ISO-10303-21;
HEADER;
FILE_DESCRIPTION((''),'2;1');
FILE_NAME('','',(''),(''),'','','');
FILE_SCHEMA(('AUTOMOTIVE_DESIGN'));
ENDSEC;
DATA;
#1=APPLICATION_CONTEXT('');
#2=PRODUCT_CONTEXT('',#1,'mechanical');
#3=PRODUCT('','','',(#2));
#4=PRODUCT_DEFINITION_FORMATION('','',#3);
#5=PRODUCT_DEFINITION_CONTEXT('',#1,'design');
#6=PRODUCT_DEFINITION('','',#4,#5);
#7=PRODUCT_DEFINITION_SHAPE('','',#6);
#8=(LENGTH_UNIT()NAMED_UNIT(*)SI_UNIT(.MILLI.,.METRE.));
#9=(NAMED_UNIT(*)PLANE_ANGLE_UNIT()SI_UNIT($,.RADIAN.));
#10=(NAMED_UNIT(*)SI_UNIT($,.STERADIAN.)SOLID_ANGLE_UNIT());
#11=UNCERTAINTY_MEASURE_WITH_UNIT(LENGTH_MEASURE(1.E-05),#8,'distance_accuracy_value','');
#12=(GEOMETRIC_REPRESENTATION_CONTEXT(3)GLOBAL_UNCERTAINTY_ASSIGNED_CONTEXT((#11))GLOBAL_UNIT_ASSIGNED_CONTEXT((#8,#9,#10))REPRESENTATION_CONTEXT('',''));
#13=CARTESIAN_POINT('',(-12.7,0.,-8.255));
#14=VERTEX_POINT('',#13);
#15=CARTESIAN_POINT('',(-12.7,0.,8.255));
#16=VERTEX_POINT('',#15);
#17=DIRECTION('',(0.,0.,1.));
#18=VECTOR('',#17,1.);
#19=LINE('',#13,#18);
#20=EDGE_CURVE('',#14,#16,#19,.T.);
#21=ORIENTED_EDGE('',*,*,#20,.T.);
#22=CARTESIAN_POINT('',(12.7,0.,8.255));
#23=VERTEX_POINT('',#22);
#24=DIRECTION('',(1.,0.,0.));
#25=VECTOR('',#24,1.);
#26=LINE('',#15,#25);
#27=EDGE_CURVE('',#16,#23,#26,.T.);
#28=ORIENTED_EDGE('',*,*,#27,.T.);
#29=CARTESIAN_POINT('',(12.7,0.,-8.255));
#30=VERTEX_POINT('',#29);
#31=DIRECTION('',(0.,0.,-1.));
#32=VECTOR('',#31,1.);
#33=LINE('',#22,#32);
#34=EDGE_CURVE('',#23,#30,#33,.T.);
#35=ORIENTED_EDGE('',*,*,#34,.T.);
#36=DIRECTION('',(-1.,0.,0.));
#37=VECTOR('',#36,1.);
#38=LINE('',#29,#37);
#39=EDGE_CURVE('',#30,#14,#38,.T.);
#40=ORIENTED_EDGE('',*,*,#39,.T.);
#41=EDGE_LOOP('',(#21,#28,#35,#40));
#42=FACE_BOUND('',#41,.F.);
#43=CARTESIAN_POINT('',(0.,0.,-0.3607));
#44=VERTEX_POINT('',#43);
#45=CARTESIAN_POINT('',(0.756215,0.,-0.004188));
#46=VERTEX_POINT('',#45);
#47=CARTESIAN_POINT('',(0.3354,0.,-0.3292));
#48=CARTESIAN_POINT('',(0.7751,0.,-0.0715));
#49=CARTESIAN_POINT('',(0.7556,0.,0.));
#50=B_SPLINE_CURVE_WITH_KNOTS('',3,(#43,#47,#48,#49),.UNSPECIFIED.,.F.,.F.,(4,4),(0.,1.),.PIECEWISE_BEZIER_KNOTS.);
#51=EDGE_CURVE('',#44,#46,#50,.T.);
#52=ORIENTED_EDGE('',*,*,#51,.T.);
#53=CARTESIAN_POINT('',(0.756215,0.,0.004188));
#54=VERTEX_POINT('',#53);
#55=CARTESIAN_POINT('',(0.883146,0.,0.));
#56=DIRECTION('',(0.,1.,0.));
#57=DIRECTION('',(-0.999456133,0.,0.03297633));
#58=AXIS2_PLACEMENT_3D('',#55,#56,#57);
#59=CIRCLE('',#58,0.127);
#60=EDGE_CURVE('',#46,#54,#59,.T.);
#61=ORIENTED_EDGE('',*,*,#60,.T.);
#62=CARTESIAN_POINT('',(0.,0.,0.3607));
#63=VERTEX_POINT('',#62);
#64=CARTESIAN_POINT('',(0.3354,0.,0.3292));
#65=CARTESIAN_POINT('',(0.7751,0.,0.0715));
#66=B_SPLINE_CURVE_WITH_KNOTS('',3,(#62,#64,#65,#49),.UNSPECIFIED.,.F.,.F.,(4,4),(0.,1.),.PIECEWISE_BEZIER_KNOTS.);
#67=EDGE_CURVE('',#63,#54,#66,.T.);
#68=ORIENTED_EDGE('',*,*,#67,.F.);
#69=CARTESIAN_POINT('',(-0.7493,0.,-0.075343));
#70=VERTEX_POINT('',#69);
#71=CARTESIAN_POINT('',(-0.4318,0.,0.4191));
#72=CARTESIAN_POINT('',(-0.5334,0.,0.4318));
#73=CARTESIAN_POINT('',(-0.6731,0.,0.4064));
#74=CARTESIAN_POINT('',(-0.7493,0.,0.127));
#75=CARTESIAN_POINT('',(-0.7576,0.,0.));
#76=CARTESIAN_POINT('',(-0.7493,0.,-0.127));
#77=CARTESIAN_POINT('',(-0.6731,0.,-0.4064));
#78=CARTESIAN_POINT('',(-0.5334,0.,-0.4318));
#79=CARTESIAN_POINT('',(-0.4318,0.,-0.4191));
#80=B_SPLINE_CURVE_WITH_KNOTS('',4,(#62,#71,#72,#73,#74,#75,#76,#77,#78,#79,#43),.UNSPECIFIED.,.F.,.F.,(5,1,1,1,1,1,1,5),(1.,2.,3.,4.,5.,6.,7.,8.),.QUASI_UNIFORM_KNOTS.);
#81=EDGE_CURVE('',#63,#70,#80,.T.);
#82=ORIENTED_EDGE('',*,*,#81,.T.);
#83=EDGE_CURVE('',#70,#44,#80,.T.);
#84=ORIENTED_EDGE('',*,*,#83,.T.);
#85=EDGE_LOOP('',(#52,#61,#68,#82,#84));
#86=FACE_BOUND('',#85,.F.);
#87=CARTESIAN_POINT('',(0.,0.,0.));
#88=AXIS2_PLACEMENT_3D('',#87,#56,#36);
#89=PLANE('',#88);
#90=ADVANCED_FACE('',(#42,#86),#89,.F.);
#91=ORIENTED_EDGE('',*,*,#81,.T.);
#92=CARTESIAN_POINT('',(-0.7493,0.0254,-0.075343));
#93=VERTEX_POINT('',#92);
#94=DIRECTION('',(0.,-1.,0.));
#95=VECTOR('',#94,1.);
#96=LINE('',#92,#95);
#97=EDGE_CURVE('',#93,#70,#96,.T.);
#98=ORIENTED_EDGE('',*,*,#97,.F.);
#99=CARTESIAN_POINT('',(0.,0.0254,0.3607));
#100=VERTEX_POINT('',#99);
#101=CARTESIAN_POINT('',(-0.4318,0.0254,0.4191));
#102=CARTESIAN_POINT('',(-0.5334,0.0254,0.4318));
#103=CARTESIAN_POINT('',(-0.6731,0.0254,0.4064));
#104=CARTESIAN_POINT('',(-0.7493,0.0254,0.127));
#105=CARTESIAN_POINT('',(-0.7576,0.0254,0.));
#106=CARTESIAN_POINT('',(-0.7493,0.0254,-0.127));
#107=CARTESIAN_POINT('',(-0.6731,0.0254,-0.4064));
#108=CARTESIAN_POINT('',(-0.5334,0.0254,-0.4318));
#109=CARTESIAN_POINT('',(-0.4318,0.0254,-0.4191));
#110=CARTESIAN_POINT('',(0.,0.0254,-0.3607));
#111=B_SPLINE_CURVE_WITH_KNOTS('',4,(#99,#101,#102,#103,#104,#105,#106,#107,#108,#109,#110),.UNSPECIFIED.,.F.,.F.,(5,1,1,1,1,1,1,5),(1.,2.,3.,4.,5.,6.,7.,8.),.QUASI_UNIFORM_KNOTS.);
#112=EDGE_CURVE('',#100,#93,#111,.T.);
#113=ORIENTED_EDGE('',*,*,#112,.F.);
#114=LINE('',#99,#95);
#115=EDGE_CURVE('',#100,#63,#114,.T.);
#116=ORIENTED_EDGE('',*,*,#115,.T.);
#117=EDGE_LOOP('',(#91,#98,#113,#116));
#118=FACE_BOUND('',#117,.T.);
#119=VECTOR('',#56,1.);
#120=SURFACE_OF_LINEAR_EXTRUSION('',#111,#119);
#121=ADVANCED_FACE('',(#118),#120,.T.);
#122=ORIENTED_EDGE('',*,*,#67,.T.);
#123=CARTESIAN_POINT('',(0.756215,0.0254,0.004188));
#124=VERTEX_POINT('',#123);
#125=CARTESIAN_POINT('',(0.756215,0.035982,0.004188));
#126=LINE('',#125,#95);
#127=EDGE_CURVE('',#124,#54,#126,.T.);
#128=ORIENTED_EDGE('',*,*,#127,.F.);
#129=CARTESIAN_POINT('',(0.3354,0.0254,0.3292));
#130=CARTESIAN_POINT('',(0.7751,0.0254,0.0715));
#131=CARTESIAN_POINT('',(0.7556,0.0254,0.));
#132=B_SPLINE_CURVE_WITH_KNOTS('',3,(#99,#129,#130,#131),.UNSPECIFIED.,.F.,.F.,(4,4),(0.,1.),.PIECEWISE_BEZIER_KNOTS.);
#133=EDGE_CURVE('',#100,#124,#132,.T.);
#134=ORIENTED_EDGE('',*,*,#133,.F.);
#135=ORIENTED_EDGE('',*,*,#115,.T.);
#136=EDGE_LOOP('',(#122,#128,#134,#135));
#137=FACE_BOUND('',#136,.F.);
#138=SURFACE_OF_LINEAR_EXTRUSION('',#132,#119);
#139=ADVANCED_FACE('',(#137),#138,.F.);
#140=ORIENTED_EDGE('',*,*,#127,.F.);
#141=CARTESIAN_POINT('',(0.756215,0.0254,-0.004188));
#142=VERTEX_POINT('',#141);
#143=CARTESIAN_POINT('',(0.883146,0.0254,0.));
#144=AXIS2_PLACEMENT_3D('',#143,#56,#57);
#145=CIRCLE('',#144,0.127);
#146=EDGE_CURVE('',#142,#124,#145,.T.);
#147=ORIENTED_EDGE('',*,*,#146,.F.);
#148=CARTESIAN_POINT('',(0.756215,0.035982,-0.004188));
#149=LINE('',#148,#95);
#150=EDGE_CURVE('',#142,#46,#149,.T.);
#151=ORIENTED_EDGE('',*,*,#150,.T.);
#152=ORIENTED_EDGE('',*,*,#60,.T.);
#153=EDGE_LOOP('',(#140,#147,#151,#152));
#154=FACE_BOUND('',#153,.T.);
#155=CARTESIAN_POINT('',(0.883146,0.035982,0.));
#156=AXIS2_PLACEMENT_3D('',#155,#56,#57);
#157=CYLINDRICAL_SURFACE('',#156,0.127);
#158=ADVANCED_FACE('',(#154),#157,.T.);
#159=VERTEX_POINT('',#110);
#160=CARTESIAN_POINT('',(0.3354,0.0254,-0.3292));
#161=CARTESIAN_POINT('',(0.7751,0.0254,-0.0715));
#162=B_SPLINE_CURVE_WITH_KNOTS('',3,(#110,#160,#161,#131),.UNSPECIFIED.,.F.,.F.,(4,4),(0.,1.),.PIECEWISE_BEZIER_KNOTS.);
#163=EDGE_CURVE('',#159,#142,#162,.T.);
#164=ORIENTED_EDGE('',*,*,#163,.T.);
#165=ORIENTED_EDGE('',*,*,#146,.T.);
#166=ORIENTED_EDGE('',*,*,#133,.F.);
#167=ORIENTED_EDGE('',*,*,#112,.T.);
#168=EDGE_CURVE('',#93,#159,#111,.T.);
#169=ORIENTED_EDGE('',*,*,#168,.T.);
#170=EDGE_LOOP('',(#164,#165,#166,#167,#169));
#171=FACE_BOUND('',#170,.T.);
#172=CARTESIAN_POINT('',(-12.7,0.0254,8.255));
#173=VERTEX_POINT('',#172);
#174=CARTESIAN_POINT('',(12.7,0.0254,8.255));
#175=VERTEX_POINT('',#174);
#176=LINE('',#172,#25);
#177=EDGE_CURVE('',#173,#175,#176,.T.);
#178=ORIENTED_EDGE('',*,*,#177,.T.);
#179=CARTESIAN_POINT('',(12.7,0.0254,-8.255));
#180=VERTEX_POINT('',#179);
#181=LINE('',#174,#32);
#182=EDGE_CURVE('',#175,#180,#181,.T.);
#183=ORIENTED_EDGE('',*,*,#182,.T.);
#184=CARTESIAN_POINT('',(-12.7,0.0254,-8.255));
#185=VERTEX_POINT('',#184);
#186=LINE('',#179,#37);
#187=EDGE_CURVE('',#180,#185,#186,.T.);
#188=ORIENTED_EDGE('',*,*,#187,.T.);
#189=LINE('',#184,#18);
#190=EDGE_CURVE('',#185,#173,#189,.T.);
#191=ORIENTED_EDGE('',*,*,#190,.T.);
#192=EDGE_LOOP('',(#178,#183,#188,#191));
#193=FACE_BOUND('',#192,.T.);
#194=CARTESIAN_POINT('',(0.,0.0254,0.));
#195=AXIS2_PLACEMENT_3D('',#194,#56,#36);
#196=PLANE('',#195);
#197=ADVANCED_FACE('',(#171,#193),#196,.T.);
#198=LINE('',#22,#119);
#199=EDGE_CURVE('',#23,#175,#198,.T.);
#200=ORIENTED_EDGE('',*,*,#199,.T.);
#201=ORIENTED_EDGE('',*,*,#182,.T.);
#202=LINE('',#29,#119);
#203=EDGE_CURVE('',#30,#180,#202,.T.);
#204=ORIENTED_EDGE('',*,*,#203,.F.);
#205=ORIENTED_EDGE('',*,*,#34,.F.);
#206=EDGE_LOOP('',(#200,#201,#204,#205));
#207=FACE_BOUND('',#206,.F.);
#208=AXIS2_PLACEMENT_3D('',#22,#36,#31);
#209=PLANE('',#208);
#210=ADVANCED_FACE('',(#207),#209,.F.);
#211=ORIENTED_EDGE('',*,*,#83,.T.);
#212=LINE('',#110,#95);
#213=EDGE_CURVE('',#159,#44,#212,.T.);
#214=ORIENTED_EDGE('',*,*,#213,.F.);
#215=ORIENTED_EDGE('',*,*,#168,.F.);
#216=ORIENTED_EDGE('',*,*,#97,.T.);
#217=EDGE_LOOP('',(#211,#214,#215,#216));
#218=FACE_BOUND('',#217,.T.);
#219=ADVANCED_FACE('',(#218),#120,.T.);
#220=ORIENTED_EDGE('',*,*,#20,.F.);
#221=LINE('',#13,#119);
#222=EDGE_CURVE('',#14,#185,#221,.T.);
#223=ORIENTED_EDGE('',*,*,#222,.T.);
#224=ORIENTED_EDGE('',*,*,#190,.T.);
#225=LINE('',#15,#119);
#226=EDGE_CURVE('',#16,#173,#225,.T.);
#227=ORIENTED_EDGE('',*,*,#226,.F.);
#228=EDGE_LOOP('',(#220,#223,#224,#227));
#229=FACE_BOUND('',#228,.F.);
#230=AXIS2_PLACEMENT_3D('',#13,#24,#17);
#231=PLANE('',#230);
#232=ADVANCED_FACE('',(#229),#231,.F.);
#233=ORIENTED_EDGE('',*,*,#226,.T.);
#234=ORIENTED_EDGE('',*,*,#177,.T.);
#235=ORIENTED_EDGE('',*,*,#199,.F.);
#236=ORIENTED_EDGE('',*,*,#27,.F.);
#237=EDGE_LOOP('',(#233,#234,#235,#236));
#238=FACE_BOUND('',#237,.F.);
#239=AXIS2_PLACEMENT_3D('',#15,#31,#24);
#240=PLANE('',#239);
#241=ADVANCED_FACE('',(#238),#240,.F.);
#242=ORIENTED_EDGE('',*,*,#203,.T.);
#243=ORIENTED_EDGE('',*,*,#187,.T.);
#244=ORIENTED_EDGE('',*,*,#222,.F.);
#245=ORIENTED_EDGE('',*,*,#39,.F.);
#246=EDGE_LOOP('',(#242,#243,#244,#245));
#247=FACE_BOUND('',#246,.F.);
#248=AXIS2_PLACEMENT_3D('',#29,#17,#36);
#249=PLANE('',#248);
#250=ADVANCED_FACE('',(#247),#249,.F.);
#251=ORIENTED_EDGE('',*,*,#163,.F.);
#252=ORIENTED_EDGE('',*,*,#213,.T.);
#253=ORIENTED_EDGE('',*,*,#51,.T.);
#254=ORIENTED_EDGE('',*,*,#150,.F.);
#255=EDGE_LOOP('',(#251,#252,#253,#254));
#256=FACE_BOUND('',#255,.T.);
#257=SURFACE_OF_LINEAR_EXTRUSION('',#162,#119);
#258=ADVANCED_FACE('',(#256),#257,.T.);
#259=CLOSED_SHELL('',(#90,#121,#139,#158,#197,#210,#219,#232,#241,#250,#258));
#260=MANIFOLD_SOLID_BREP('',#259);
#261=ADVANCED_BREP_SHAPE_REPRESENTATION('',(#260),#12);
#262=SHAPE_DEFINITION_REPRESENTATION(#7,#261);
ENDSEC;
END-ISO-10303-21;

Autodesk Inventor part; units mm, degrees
ref_plane "YZ Plane" through (0, 0, 0) normal (1, 0, 0) x (0, 1, 0)
ref_plane "XZ Plane" through (0, 0, 0) normal (0, 1, 0) x (-1, 0, 0)
ref_plane "XY Plane" through (0, 0, 0) normal (0, 0, 1) x (1, 0, 0)
sketch "stock_cut_for_holder" plane through (0, 0, 0) normal (0, 1, 0) x (-1, 0, 0)
  line L0 (-12.7, -8.255) -> (12.7, -8.255)
  line L1 (12.7, -8.255) -> (12.7, 8.255)
  line L2 (12.7, 8.255) -> (-12.7, 8.255)
  line L3 (-12.7, 8.255) -> (-12.7, -8.255)
  line L4 (-12.7, -8.255) -> (12.7, 8.255) construction
  line L5 (12.7, -8.255) -> (-12.7, 8.255) construction
  point P0 (0, 0)
  dimension "cut_shim_height" = 25.4
  dimension "cut_shim_width" = 16.51
extrude "Plate1" add sketch "stock_cut_for_holder" along normal blind 0.0254
sketch "mill_path" plane through (0, 0.0254, 0) normal (0, 1, 0) x (1, 0, 0)
  line L0 (12.7, 8.255) -> (12.7, -8.255) projected
  line L1 (-12.7, 8.255) -> (12.7, 8.255) projected
  line L2 (-12.7, -8.255) -> (-12.7, 8.255) projected
  line L3 (12.7, -8.255) -> (-12.7, -8.255) projected
  line L4 (-12.7, 8.255) -> (-12.7, -8.255) projected
  line L5 (-12.7, 0) -> (12.7, 0) construction
  line L6 (12.7, -8.255) -> (12.7, 8.255) projected
  line L7 (0, 0) -> (0, -0.3607) construction
  line L8 (0, 0) -> (0, 0.3607) construction
  line L9 (-0.4318, 0) -> (-0.4318, -0.4191) construction
  line L10 (-0.4318, 0) -> (-0.4318, 0.4191) construction
  line L11 (0.508, 0) -> (0.508, -0.1969) construction
  line L12 (-0.6731, 0) -> (-0.6731, -0.4064) construction
  line L13 (0.508, 0) -> (0.508, 0.1968) construction
  line L14 (-0.6731, 0) -> (-0.6731, 0.4064) construction
  line L15 (-0.5334, 0) -> (-0.5334, -0.4318) construction
  line L16 (-0.5334, 0) -> (-0.5334, 0.4318) construction
  line L17 (0.508, 0) -> (0.508, 0.1968) construction
  line L18 (-0.7493, 0) -> (-0.7493, -0.127) construction
  line L19 (-0.7493, 0) -> (-0.7493, 0.127)
  line L20 (0.7366, 0) -> (0.7366, -0.0419) construction
  line L21 (0.7366, 0) -> (0.7366, 0.0419) construction
  spline S0 degree 3 poles (0, -0.3607) (0.3354, -0.3292) (0.7751, -0.0715) (0.7556, 0) knots 0 0 0 0 1 1 1 1
  spline S1 degree 3 poles (0, 0.3607) (0.3354, 0.3292) (0.7751, 0.0715) (0.7556, 0) knots 0 0 0 0 1 1 1 1
  line L22 (0, -0.3607) -> (-0.4318, -0.4191) construction
  line L23 (-0.4318, -0.4191) -> (-0.5334, -0.4318) construction
  line L24 (-0.5334, -0.4318) -> (-0.6731, -0.4064) construction
  line L25 (-0.6731, -0.4064) -> (-0.7493, -0.127) construction
  line L26 (-0.7493, -0.127) -> (-0.7576, 0) construction
  line L27 (-0.7576, 0) -> (-0.7493, 0.127) construction
  line L28 (-0.7493, 0.127) -> (-0.6731, 0.4064) construction
  line L29 (-0.6731, 0.4064) -> (-0.5334, 0.4318) construction
  line L30 (-0.5334, 0.4318) -> (-0.4318, 0.4191) construction
  line L31 (-0.4318, 0.4191) -> (0, 0.3607) construction
  spline S2 degree 4 poles (0, -0.3607) (-0.4318, -0.4191) (-0.5334, -0.4318) (-0.6731, -0.4064) (-0.7493, -0.127) (-0.7576, 0) (-0.7493, 0.127) (-0.6731, 0.4064) (-0.5334, 0.4318) (-0.4318, 0.4191) (0, 0.3607) knots 1 1 1 1 1 2 3 4 5 6 7 8 8 8 8 8
  dimension "half_mid_thorax_width" = 0.3607
  dimension "mid_thorax_to_prescutum" = 0.4318
  dimension "w2" = 0.4191
  dimension "d9" = 0.1968
  dimension "mid_thorax_to_anterior_scutellum" = 0.508
  dimension "d11" = 0.4064
  dimension "d13" = 0.4318
  dimension "head_thorax" = 0.1016
  dimension "d15" = 0.1397
  dimension "d17" = 0.127
  dimension "d18" = 0.0762
  dimension "scutellum_taper" = 0.2286
  dimension "d20" = 0.0419
  dimension "d21" = 0.0191
  dimension "d22" = 0.0083
  dimension "d24" = 0.3175
  dimension "d25" = 1.5132
extrude "milled_hole" cut sketch "mill_path" against normal blind 0.0254 contours S2 S1 S0
fillet "Corner Round1" radius 0.127 1 edges at (0.7556, 0.0127, 0)
equation "\"d26\" = Thickness"
equation "\"BendRadius\" = Thickness"
equation "\"BendReliefWidth\" = Thickness"
equation "\"BendReliefDepth\" = 0.5 * Thickness"
equation "\"CornerReliefSize\" = 4 * Thickness"
equation "\"MinimumRemnant\" = 2 * Thickness"
equation "\"TransitionRadius\" = BendRadius"
equation "\"JacobiRadiusSize\" = BendRadius"
equation "\"GapSize\" = Thickness"
equation "\"d2\" = BendRadius"
equation "\"Thickness\" = 0.0254"
properties part number "antennal_lobe_v01_kumato" material "Stainless Steel AISI 317"
